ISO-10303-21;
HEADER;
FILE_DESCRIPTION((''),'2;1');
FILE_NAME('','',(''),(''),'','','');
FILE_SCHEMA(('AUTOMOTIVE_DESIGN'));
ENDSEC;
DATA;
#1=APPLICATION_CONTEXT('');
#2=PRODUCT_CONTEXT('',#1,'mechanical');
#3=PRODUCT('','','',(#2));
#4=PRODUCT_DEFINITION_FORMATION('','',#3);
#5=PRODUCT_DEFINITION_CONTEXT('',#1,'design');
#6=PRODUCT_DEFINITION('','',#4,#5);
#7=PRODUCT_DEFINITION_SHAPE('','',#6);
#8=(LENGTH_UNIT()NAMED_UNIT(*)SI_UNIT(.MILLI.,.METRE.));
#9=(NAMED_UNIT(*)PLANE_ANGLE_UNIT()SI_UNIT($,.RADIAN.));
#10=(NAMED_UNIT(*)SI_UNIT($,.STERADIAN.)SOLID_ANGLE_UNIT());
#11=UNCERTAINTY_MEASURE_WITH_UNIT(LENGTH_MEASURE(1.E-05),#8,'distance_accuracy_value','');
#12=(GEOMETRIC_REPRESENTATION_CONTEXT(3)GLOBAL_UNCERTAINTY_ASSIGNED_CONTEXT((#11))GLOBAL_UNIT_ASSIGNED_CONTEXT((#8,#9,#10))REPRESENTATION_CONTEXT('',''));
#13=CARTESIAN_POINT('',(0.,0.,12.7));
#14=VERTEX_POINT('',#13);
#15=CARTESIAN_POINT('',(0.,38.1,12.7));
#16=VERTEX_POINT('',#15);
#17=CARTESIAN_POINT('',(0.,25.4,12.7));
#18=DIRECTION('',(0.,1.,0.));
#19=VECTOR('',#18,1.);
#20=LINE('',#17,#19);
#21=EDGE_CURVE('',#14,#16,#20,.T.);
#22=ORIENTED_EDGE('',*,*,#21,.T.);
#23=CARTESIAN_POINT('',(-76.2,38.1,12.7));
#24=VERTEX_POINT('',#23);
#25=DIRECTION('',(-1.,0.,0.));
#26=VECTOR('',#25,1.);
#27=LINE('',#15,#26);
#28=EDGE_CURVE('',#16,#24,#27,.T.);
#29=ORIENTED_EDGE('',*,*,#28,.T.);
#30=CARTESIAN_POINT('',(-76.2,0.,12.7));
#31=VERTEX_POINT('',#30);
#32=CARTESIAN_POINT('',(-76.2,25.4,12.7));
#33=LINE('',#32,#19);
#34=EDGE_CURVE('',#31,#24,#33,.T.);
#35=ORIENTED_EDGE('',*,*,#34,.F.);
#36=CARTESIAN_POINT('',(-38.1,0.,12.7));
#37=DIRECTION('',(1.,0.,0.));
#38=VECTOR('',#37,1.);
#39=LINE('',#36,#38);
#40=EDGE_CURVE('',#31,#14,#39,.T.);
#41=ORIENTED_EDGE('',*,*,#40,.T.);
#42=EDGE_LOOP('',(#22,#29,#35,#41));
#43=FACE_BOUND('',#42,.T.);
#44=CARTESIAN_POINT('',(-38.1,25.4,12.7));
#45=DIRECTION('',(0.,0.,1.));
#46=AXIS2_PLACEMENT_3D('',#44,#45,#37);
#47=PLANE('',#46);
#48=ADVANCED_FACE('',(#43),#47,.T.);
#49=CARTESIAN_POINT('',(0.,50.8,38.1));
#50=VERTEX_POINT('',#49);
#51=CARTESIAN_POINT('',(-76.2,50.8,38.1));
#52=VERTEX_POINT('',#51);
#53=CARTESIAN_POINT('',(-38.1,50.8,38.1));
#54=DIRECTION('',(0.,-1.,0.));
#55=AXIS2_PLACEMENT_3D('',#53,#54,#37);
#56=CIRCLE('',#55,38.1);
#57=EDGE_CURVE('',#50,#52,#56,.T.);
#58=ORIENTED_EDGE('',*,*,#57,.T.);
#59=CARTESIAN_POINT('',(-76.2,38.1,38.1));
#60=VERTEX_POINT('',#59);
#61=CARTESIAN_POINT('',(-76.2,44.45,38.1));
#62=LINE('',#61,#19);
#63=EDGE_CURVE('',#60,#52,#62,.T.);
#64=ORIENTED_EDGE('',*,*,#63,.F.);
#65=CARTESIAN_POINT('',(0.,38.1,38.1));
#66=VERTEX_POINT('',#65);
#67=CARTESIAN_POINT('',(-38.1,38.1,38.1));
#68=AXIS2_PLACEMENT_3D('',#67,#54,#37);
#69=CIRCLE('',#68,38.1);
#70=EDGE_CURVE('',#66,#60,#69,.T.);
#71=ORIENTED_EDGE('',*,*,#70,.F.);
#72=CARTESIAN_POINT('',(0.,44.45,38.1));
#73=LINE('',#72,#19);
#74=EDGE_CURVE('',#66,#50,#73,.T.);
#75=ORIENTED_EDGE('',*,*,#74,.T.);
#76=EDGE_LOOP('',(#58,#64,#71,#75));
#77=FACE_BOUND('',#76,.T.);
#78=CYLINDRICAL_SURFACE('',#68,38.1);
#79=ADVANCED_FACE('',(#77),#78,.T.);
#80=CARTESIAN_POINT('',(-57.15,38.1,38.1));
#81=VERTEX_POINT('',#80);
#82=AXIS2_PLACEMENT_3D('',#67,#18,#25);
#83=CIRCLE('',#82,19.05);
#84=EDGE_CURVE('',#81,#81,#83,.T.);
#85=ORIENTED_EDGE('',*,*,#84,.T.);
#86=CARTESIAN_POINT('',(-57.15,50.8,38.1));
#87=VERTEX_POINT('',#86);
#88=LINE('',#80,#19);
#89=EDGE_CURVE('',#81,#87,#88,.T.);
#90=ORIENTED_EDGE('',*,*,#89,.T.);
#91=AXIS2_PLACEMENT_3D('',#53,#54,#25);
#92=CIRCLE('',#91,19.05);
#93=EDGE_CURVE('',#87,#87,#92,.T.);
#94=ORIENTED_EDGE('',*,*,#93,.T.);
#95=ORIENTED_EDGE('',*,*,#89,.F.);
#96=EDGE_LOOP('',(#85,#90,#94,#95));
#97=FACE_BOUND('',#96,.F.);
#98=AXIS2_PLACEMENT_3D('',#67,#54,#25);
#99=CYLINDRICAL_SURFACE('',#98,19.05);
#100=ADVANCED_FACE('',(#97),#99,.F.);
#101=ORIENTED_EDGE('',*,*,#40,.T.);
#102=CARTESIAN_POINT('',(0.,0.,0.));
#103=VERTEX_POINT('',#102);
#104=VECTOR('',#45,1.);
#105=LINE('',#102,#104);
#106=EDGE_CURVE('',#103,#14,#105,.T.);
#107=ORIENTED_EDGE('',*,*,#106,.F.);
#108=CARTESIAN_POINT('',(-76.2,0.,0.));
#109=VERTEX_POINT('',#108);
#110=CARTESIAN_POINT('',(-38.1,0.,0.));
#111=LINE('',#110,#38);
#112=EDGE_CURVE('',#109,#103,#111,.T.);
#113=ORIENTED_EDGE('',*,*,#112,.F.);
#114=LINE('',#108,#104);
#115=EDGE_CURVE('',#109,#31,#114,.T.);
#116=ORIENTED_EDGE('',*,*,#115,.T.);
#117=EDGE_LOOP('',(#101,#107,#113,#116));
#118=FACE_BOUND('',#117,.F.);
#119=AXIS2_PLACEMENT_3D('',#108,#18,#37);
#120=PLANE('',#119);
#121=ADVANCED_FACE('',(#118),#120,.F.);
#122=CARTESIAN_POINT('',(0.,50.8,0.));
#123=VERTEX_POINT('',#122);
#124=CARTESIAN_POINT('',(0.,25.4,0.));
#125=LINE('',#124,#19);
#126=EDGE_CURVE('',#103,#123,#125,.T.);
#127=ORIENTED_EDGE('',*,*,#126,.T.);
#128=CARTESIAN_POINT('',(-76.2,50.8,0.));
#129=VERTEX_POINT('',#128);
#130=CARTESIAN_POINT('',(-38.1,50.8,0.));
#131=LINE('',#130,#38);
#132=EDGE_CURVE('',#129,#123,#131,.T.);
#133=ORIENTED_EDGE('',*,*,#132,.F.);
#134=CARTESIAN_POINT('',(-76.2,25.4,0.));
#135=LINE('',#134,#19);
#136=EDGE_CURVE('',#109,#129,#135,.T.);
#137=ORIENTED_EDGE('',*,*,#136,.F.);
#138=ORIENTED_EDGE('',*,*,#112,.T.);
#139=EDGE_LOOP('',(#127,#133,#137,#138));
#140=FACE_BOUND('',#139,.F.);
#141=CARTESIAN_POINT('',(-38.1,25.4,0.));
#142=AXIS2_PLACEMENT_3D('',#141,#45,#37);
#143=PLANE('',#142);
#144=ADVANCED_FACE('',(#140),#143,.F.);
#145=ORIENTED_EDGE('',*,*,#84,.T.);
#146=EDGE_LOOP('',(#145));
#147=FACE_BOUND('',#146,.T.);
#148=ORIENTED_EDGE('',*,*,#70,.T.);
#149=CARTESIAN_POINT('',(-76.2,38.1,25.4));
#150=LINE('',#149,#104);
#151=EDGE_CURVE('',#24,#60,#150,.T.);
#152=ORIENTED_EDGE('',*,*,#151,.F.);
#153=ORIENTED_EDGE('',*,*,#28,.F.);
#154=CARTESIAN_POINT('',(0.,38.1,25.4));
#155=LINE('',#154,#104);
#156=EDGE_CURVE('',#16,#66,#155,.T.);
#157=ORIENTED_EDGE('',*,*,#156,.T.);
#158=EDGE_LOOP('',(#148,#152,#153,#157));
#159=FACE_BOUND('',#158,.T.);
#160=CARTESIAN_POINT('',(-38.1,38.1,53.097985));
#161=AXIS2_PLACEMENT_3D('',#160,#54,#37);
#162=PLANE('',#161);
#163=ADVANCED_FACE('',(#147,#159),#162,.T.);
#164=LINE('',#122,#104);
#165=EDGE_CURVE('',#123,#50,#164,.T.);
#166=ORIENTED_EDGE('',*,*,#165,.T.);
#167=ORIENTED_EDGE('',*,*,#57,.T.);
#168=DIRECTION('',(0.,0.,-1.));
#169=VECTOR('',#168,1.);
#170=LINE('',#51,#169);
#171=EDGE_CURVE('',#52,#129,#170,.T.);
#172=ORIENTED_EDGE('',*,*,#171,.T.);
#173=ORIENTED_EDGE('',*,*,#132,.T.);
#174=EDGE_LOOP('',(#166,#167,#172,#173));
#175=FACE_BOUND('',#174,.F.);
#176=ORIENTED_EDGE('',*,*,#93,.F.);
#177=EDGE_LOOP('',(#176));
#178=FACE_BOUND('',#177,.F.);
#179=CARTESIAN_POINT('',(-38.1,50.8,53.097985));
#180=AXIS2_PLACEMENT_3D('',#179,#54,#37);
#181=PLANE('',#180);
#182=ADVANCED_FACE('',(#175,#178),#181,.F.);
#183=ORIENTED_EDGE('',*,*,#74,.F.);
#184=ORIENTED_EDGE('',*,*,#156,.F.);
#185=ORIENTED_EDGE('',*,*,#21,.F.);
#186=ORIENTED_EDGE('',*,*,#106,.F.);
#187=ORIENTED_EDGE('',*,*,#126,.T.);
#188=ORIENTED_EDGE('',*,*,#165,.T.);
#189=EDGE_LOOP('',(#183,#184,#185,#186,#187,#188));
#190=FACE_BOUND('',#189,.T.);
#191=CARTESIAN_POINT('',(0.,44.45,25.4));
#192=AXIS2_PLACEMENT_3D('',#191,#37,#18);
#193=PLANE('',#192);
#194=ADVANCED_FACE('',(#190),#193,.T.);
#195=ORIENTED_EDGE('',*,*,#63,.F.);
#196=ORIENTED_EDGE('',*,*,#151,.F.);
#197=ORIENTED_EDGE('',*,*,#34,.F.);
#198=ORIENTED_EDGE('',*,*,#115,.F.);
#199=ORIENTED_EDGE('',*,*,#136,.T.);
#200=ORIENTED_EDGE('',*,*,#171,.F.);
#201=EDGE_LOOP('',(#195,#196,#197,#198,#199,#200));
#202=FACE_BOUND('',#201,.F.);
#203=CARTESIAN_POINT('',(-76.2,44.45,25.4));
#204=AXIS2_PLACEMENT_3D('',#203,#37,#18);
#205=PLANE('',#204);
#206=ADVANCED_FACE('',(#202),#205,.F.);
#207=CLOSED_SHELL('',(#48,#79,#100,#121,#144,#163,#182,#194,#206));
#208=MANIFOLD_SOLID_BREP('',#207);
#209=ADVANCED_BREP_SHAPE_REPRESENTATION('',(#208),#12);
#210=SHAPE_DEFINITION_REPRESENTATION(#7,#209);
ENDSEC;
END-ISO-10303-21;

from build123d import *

# Parameters (mm, degrees)
F0_W     = 76.2
F0_H     = 50.8
F1_DEPTH = 12.7
F2_W     = 12.7
F2_H     = 25.4
F3_DEPTH = 76.2
F5_DEPTH = 12.7
F7_DEPTH = 30.48


with BuildPart() as f1:
    # F0 (on Top) → F1 (new body)
    with BuildSketch(Plane.XY):
        with Locations((-38.1, 25.4)):
            Rectangle(F0_W, F0_H)
    extrude(amount=F1_DEPTH)

    # F2 (on face) → F3 (join)
    with BuildSketch(Plane.YZ):
        with Locations((44.45, 25.4)):
            Rectangle(F2_W, F2_H)
    extrude(amount=-F3_DEPTH)

    # F4 (on face) → F5 (join)
    with BuildSketch(Plane.XZ.offset(-38.1)):
        with BuildLine():
            Line((-19.05, 38.1), (0, 38.1))
            ThreePointArc((0, 38.1), (-38.1, 76.2), (-76.2, 38.1))
            Line((-76.2, 38.1), (-57.15, 38.1))
            ThreePointArc((-57.15, 38.1), (-38.1, 57.15), (-19.05, 38.1))
        make_face()
    extrude(amount=-F5_DEPTH)

    # F6 (on face) → F7 (cut)
    with BuildSketch(Plane.XZ.offset(-38.1)):
        with BuildLine():
            Line((-57.15, 38.1), (-19.05, 38.1))
            ThreePointArc((-19.05, 38.1), (-38.1, 57.15), (-57.15, 38.1))
        make_face()
        with BuildLine():
            ThreePointArc((-57.15, 38.1), (-38.1, 19.05), (-19.05, 38.1))
            Line((-19.05, 38.1), (-57.15, 38.1))
        make_face()
    extrude(amount=-F7_DEPTH, mode=Mode.SUBTRACT)


solid = f1.part
